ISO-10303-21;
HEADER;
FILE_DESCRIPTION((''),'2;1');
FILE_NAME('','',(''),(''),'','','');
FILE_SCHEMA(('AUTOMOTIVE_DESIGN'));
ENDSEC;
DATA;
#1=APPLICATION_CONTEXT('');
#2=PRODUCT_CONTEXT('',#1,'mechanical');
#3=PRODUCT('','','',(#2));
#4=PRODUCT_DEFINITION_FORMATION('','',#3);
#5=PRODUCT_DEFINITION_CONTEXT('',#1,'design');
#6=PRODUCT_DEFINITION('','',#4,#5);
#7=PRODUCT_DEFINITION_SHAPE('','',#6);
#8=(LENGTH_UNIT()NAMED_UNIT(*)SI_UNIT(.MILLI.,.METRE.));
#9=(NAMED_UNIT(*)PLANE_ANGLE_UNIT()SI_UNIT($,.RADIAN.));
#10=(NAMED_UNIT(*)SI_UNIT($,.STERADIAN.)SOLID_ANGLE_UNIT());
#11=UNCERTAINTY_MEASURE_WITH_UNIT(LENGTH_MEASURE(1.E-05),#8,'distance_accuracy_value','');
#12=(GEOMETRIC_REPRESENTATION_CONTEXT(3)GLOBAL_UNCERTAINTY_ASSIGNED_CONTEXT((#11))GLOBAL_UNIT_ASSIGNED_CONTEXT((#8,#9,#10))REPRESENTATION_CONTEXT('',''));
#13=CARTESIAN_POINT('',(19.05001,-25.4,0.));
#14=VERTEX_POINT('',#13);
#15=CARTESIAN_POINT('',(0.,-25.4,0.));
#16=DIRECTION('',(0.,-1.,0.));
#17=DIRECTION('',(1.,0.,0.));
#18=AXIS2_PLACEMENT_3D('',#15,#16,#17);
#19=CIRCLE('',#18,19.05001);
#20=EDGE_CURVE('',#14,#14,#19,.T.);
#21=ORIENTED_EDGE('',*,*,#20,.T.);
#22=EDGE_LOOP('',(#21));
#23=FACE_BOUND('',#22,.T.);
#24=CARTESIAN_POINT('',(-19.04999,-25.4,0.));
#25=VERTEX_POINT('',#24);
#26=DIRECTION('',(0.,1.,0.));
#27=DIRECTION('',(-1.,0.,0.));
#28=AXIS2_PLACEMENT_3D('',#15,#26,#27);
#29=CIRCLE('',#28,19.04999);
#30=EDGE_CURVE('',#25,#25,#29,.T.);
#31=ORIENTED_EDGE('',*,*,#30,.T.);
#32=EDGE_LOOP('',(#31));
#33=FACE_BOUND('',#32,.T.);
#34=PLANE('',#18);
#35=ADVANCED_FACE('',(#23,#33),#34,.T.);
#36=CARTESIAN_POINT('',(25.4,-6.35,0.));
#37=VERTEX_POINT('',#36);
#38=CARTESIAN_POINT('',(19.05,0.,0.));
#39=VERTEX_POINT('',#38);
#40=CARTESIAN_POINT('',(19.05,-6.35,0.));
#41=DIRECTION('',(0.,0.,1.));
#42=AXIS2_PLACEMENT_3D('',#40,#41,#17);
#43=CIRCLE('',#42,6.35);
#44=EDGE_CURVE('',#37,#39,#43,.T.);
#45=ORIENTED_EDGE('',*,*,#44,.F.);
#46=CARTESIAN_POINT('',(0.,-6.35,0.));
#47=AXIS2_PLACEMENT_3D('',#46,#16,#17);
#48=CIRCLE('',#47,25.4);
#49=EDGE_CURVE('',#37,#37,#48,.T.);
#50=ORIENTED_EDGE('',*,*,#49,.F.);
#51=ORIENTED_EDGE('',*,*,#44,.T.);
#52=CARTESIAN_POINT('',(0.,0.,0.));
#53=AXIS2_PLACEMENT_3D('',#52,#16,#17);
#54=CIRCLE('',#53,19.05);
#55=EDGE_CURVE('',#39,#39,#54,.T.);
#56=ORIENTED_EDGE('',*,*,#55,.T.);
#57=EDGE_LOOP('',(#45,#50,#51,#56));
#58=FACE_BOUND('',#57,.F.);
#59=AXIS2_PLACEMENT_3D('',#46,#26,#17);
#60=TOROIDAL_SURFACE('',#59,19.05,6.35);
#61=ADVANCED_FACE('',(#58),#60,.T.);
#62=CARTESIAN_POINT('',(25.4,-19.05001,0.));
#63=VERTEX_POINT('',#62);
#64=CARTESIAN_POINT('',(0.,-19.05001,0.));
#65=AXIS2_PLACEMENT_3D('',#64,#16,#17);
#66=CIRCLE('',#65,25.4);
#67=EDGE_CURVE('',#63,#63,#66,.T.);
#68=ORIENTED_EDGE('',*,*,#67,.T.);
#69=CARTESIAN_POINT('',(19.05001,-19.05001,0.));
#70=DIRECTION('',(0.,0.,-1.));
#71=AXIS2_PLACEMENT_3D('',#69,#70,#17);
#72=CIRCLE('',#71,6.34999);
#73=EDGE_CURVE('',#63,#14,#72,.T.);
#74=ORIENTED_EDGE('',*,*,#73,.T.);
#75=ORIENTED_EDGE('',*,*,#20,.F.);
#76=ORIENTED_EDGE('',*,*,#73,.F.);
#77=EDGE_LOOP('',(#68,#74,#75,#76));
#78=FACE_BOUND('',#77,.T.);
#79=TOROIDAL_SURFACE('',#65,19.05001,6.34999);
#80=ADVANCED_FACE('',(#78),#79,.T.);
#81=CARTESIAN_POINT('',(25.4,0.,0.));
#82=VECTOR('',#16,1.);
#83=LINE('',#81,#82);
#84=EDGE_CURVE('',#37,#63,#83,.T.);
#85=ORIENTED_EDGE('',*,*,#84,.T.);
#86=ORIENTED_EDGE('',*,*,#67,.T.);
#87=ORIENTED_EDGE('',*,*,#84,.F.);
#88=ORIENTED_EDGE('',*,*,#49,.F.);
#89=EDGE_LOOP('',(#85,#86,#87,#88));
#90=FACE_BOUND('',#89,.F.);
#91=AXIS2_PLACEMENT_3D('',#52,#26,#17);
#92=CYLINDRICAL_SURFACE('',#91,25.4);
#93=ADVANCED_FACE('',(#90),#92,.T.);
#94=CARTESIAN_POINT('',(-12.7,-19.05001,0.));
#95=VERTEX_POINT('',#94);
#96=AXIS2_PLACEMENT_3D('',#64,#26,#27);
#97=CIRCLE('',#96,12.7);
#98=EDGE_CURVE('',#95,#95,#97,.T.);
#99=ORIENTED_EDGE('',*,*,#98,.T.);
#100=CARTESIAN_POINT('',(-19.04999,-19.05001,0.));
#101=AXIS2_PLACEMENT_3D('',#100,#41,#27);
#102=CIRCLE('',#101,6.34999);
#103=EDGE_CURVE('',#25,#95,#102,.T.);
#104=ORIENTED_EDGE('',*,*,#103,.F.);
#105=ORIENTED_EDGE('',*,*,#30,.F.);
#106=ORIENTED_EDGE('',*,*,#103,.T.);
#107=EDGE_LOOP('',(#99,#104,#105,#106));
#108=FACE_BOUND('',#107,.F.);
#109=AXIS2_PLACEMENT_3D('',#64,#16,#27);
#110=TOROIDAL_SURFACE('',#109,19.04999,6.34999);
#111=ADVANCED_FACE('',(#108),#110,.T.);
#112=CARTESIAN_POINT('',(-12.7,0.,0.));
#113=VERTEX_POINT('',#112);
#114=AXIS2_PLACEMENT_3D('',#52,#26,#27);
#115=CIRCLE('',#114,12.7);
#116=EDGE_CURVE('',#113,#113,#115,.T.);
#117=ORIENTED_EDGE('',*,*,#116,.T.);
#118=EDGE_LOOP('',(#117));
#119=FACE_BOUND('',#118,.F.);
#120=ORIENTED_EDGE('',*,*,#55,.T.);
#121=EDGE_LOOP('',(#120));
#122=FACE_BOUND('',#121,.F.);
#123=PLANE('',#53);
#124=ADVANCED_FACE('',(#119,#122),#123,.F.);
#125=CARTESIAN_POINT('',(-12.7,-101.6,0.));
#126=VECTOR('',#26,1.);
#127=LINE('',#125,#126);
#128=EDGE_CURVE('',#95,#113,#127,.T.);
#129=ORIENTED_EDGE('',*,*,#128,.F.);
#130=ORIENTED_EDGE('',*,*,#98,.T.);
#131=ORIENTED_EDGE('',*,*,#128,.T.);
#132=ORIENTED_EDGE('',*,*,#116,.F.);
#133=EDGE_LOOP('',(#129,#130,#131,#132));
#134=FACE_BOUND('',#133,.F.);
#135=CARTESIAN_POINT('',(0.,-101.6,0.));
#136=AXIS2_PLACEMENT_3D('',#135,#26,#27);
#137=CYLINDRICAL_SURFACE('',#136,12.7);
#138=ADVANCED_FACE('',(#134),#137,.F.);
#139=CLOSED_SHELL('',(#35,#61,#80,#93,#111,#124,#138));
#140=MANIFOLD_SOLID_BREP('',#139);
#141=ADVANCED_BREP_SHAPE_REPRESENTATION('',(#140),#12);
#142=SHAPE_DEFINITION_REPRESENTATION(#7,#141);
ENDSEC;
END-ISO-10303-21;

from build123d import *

# Parameters (mm, degrees)
F3_R     = 25.4
F4_DEPTH = 25.4
F6_D     = 25.4
F7_R     = 6.34999
F8_R     = 6.35


# Not quite as in the source:
# - a fillet or chamfer is up to 0.001 mm smaller than in the source, because OpenCascade refuses the exact size
# - the program builds the solid bodies; features that only make, move or delete a surface that nothing else refers to are left out


with BuildPart() as f4:
    # F3 (on Front) → F4 (new body)
    with BuildSketch(Plane.XZ):
        Circle(F3_R)
    extrude(amount=F4_DEPTH)

    # F6 (through all)
    with Locations(Plane.XZ.offset(25.4)):
        with Locations((0, 0)):
            Hole(F6_D / 2)

    # F7 (radius 6.35 in the source; OpenCascade refuses exactly that, so slightly less here)
    f7_edges = [f4.edges().sort_by_distance(p)[0] for p in [
        (-25.4, -25.4, 0),
        (-12.7, -25.4, 0),
    ]]
    fillet(f7_edges, radius=F7_R)

    # F8
    f8_edges = [f4.edges().sort_by_distance(p)[0] for p in [
        (-25.4, 0, 0),
    ]]
    fillet(f8_edges, radius=F8_R)


solid = f4.part
